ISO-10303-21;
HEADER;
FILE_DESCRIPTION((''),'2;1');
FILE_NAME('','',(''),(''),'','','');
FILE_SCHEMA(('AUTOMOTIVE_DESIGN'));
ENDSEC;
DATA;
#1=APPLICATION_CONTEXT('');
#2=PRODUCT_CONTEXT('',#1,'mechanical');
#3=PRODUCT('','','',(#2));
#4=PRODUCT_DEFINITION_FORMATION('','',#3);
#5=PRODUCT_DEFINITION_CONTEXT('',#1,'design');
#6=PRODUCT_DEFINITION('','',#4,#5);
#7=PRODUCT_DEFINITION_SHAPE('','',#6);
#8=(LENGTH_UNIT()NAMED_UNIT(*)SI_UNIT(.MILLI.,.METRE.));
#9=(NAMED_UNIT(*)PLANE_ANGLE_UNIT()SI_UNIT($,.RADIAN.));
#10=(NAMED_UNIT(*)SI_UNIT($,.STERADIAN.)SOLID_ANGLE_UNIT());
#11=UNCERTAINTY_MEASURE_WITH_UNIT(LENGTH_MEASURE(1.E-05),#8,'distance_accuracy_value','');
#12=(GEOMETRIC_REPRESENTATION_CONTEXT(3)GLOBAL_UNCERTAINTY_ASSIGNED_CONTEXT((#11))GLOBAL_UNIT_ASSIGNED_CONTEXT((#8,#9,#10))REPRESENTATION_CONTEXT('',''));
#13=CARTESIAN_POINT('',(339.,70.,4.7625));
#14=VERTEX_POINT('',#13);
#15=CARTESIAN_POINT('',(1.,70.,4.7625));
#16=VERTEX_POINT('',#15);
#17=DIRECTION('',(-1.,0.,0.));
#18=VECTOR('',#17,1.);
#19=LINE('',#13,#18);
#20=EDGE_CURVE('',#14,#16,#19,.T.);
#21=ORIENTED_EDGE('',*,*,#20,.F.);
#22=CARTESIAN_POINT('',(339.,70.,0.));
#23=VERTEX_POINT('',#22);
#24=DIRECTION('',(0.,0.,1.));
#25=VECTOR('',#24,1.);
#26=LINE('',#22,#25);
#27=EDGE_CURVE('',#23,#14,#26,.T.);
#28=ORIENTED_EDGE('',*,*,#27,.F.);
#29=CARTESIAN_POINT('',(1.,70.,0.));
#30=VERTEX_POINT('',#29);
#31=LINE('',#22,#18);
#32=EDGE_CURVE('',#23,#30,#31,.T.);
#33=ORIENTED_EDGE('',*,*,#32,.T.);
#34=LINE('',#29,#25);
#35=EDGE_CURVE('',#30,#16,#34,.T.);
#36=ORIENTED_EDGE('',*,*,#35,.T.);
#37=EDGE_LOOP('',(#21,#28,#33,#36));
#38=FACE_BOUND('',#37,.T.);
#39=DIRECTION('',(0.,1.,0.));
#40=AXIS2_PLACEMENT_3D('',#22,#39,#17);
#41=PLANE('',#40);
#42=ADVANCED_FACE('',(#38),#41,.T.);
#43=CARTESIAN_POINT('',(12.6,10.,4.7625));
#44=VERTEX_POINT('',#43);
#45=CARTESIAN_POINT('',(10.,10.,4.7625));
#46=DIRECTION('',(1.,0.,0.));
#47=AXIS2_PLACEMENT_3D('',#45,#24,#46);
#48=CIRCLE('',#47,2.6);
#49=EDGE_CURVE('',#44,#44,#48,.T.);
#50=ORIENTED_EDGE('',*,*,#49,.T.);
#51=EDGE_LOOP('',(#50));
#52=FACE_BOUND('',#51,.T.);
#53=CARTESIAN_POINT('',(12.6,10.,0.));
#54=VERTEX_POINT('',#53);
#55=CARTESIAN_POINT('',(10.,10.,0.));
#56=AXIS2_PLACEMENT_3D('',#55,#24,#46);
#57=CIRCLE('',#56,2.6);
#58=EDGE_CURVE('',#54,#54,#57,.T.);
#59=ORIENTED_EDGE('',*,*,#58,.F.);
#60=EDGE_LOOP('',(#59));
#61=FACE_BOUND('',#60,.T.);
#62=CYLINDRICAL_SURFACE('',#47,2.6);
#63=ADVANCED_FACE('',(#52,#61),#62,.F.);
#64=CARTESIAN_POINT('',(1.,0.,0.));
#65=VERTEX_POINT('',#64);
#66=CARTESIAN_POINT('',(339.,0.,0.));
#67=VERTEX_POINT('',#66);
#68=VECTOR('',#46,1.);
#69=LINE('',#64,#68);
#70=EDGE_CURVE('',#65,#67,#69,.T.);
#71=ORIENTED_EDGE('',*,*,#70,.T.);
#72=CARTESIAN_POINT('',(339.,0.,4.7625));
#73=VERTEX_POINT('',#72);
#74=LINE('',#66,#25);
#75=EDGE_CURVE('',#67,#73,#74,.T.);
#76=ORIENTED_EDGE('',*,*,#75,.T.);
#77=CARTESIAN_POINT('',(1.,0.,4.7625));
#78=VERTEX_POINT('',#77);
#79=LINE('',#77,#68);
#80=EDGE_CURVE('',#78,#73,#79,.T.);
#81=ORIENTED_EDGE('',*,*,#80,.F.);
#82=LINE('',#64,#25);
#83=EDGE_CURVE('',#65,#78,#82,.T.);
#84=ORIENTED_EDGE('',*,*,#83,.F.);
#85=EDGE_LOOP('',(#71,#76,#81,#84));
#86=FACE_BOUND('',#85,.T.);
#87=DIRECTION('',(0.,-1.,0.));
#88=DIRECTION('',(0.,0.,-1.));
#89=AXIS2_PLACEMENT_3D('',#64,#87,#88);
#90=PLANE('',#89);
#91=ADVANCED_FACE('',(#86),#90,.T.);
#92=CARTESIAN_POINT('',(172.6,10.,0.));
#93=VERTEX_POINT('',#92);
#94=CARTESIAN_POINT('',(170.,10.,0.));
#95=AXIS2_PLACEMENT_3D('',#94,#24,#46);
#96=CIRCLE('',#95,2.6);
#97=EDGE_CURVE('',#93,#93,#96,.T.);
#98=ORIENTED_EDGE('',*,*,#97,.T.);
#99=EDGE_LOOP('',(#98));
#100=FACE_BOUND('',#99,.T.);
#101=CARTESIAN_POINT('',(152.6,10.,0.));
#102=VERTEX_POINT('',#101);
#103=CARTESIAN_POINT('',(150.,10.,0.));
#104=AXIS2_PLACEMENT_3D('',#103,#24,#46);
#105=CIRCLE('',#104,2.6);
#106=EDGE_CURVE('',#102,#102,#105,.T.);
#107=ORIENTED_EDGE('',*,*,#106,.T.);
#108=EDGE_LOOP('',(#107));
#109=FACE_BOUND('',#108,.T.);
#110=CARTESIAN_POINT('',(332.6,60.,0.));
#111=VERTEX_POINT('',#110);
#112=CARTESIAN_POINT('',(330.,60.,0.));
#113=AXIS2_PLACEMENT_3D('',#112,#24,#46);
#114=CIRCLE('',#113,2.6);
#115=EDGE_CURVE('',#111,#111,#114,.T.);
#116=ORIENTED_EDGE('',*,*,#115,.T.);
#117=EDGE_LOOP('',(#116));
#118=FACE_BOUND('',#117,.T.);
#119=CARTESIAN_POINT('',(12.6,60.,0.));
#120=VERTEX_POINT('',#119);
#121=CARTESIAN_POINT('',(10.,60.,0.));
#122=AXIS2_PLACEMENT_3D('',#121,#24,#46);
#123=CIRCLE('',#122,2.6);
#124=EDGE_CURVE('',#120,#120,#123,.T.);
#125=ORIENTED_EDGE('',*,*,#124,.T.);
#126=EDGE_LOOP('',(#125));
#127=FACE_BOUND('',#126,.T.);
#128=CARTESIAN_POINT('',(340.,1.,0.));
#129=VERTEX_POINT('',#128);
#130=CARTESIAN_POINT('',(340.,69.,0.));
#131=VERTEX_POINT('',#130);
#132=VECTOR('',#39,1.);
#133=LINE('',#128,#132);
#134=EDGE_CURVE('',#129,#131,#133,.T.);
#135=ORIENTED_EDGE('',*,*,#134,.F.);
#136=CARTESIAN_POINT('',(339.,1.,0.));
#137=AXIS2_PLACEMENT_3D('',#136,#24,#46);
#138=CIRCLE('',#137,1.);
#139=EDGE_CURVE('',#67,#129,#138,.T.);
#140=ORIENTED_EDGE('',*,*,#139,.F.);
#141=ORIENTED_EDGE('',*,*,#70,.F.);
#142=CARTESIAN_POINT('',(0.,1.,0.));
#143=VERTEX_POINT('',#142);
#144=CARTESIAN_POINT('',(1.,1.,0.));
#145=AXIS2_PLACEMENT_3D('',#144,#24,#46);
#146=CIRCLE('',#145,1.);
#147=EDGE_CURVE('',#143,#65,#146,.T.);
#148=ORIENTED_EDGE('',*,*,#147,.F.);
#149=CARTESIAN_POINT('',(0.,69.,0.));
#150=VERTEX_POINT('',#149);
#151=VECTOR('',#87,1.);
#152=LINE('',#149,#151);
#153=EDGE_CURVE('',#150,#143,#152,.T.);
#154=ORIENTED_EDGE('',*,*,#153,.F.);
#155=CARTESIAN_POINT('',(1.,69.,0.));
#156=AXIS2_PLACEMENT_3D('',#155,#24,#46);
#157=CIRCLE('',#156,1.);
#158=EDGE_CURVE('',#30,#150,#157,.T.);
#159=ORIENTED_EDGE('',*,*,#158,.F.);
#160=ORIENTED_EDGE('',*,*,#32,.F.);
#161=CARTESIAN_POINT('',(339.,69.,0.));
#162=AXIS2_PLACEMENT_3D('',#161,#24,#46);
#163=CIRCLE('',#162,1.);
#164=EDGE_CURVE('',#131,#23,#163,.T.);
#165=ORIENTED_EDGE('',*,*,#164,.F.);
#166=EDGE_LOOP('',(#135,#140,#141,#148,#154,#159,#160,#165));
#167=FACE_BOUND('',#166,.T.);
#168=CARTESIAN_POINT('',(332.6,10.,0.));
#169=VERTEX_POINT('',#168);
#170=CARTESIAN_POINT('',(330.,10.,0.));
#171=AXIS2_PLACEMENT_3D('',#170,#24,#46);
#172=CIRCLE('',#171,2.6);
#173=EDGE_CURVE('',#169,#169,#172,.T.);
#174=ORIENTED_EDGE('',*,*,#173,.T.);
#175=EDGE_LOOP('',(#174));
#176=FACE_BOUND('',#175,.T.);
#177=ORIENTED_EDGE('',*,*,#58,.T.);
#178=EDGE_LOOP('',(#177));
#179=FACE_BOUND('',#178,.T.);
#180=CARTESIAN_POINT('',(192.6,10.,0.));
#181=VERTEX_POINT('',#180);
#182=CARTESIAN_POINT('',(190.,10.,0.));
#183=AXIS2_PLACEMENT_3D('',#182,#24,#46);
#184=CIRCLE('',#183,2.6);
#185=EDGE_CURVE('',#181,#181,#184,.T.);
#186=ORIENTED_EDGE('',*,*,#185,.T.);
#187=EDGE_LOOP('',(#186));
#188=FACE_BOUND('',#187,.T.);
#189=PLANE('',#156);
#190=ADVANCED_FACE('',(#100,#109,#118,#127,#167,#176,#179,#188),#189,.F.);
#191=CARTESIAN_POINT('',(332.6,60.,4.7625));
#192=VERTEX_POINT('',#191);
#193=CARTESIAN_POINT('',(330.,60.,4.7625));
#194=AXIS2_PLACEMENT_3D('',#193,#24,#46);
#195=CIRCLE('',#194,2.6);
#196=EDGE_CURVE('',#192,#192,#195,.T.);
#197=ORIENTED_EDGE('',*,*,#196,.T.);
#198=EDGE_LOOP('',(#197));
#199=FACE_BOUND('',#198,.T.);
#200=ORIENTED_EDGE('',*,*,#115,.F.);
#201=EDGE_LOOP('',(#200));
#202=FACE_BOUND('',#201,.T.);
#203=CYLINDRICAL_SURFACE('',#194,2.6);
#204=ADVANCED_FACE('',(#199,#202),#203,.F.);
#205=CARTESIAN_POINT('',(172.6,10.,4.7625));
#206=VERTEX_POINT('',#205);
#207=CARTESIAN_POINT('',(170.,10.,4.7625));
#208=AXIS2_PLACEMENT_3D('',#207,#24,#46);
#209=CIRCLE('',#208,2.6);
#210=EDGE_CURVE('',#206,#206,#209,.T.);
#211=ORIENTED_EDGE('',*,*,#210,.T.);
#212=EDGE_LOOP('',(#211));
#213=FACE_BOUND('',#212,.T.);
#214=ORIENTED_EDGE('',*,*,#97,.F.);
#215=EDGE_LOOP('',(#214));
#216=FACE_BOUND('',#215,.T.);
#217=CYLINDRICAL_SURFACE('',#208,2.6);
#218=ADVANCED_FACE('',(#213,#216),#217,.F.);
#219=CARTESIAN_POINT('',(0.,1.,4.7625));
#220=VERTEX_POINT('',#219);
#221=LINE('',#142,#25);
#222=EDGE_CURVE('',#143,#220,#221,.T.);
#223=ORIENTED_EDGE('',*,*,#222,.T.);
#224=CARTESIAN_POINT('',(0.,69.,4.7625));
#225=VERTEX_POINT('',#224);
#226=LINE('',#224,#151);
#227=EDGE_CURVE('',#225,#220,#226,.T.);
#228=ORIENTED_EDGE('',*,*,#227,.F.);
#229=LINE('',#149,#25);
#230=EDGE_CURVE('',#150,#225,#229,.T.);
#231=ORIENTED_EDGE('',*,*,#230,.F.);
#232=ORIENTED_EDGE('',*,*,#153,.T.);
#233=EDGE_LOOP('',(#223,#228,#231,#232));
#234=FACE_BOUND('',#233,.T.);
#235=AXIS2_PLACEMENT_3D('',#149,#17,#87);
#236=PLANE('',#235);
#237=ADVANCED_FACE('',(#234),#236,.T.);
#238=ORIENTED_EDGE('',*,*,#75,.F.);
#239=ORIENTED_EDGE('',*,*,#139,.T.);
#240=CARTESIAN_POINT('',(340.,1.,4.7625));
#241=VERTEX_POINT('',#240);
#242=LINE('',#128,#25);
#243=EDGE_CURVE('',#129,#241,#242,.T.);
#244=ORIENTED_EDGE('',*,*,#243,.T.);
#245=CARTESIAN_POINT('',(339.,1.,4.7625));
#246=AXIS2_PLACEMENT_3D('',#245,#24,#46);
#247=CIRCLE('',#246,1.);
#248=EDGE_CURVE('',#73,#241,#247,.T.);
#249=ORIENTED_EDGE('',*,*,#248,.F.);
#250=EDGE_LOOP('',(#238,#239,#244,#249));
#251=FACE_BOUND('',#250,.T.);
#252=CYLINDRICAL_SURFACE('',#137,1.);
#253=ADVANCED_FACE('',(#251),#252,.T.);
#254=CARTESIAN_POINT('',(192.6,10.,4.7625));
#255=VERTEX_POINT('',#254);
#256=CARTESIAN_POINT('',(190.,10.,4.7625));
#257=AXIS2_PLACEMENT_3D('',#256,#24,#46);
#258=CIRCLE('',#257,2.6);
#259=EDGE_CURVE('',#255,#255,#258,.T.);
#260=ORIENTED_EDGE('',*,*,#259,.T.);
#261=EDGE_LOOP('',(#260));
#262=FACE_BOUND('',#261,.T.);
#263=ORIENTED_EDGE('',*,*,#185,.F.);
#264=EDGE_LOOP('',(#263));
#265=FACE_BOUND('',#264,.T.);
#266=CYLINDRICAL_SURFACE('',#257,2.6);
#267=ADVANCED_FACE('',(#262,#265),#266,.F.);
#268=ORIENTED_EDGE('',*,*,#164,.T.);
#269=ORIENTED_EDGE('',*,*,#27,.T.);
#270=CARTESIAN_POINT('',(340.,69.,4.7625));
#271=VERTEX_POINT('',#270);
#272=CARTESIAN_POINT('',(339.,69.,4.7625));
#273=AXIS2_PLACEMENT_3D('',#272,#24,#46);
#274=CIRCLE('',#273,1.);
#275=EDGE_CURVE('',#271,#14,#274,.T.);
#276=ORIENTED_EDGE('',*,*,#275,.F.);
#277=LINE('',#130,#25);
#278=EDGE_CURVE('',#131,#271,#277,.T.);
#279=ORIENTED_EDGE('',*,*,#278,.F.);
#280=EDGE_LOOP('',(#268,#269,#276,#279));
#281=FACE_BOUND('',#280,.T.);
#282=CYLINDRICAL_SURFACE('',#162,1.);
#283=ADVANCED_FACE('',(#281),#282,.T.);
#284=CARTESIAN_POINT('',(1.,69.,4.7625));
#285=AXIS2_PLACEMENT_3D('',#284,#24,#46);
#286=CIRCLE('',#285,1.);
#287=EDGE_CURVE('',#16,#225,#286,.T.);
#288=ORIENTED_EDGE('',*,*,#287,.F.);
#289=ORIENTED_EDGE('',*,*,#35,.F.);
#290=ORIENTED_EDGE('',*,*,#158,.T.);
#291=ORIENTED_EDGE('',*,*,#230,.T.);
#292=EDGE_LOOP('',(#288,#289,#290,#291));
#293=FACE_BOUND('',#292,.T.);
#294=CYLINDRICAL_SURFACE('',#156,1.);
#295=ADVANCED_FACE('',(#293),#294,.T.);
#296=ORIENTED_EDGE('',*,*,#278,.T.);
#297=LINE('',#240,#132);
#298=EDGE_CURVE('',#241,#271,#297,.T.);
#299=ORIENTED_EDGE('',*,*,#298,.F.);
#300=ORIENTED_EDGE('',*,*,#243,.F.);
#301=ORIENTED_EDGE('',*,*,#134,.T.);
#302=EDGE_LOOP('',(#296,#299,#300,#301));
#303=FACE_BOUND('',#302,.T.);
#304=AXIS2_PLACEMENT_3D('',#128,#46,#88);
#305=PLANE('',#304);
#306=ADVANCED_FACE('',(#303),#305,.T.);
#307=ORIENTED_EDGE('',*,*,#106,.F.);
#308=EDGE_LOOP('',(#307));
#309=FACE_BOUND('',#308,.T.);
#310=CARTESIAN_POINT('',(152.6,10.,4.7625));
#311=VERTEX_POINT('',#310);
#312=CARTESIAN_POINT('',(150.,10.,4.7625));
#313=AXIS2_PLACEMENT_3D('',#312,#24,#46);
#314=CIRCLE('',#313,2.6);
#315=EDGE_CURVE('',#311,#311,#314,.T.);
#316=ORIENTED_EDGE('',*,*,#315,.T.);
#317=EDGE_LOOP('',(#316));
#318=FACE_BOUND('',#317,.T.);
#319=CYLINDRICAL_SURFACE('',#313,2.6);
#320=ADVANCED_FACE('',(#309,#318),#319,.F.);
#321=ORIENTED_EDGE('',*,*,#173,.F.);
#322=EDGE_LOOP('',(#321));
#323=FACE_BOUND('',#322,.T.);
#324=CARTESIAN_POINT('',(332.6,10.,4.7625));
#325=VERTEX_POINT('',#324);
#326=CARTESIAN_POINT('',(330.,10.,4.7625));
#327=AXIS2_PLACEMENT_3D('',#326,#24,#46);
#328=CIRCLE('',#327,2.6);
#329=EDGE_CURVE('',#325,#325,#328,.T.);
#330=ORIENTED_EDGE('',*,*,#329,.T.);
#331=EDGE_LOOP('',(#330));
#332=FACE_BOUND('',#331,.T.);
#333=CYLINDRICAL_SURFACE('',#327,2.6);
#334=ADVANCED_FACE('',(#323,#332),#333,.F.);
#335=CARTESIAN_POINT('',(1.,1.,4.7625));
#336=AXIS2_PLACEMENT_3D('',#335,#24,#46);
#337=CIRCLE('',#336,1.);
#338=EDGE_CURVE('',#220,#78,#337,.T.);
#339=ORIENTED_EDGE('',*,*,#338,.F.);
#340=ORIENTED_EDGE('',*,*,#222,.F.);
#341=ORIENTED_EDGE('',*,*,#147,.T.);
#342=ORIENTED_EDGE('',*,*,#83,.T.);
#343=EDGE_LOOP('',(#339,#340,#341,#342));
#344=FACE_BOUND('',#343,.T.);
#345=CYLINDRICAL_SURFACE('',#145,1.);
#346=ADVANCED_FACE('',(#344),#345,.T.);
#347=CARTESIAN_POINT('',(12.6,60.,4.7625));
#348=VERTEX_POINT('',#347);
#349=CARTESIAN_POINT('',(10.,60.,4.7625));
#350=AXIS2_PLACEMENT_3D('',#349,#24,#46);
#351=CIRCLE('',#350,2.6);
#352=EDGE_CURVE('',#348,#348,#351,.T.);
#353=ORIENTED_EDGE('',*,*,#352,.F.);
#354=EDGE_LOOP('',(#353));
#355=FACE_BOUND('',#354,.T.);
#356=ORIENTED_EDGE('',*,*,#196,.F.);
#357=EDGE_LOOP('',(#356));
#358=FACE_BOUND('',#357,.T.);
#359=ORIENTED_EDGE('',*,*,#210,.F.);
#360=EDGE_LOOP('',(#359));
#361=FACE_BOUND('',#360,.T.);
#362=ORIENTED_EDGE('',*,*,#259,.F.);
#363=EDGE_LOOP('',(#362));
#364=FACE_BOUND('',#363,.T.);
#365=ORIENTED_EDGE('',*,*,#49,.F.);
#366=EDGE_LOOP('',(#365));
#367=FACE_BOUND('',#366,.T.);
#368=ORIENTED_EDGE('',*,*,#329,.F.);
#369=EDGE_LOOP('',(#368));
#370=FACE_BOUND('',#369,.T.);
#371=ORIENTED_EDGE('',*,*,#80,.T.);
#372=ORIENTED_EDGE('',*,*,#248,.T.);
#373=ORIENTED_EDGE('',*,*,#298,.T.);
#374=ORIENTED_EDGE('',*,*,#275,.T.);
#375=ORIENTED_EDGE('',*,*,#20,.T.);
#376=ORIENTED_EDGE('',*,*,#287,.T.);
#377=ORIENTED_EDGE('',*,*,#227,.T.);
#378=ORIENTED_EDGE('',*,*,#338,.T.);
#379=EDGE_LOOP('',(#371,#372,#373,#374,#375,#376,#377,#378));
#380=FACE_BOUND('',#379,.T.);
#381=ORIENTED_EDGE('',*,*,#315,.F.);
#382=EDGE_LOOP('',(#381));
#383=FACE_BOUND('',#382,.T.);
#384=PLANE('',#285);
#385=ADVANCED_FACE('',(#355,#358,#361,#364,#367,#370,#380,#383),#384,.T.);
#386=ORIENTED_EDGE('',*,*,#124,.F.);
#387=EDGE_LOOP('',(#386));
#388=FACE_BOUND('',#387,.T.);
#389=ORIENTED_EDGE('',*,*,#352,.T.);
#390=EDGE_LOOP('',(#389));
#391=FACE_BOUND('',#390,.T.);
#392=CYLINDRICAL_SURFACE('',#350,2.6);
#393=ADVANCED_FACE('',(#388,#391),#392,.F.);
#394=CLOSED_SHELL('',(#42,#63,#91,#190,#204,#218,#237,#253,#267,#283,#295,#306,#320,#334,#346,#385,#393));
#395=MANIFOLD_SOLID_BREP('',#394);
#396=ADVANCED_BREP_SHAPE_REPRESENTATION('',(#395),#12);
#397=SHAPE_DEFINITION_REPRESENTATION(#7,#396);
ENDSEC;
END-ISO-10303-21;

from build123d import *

# Parameters (mm, degrees)
BASE_FLANGE1_DEPTH         = 4.7625
F_5_2_5_2_DIAMETER_HOLE1_D = 5.2


# Sheet-metal steps are written as plain solids
with BuildPart() as part:
    # Sketch11 → Base-Flange1 (new body)
    with BuildSketch(Plane.XY.offset(4.7625)):
        with BuildLine():
            Line((0, 69), (0, 1))
            ThreePointArc((0, 1), (0.292893219, 0.292893219), (1, 0))
            Line((1, 0), (339, 0))
            ThreePointArc((339, 0), (339.707106781, 0.292893219), (340, 1))
            Line((340, 1), (340, 69))
            ThreePointArc((340, 69), (339.707106781, 69.707106781), (339, 70))
            Line((339, 70), (1, 70))
            ThreePointArc((1, 70), (0.292893219, 69.707106781), (0, 69))
        make_face()
    extrude(amount=-BASE_FLANGE1_DEPTH)

    # Ø5.2 (5.2) Diameter Hole1 (through all)
    with Locations(Plane.XY.offset(4.7625)):
        with Locations((190, 10), (170, 10), (330, 60), (10, 10), (10, 60), (330, 10), (150, 10)):
            Hole(F_5_2_5_2_DIAMETER_HOLE1_D / 2)


solid = part.part
